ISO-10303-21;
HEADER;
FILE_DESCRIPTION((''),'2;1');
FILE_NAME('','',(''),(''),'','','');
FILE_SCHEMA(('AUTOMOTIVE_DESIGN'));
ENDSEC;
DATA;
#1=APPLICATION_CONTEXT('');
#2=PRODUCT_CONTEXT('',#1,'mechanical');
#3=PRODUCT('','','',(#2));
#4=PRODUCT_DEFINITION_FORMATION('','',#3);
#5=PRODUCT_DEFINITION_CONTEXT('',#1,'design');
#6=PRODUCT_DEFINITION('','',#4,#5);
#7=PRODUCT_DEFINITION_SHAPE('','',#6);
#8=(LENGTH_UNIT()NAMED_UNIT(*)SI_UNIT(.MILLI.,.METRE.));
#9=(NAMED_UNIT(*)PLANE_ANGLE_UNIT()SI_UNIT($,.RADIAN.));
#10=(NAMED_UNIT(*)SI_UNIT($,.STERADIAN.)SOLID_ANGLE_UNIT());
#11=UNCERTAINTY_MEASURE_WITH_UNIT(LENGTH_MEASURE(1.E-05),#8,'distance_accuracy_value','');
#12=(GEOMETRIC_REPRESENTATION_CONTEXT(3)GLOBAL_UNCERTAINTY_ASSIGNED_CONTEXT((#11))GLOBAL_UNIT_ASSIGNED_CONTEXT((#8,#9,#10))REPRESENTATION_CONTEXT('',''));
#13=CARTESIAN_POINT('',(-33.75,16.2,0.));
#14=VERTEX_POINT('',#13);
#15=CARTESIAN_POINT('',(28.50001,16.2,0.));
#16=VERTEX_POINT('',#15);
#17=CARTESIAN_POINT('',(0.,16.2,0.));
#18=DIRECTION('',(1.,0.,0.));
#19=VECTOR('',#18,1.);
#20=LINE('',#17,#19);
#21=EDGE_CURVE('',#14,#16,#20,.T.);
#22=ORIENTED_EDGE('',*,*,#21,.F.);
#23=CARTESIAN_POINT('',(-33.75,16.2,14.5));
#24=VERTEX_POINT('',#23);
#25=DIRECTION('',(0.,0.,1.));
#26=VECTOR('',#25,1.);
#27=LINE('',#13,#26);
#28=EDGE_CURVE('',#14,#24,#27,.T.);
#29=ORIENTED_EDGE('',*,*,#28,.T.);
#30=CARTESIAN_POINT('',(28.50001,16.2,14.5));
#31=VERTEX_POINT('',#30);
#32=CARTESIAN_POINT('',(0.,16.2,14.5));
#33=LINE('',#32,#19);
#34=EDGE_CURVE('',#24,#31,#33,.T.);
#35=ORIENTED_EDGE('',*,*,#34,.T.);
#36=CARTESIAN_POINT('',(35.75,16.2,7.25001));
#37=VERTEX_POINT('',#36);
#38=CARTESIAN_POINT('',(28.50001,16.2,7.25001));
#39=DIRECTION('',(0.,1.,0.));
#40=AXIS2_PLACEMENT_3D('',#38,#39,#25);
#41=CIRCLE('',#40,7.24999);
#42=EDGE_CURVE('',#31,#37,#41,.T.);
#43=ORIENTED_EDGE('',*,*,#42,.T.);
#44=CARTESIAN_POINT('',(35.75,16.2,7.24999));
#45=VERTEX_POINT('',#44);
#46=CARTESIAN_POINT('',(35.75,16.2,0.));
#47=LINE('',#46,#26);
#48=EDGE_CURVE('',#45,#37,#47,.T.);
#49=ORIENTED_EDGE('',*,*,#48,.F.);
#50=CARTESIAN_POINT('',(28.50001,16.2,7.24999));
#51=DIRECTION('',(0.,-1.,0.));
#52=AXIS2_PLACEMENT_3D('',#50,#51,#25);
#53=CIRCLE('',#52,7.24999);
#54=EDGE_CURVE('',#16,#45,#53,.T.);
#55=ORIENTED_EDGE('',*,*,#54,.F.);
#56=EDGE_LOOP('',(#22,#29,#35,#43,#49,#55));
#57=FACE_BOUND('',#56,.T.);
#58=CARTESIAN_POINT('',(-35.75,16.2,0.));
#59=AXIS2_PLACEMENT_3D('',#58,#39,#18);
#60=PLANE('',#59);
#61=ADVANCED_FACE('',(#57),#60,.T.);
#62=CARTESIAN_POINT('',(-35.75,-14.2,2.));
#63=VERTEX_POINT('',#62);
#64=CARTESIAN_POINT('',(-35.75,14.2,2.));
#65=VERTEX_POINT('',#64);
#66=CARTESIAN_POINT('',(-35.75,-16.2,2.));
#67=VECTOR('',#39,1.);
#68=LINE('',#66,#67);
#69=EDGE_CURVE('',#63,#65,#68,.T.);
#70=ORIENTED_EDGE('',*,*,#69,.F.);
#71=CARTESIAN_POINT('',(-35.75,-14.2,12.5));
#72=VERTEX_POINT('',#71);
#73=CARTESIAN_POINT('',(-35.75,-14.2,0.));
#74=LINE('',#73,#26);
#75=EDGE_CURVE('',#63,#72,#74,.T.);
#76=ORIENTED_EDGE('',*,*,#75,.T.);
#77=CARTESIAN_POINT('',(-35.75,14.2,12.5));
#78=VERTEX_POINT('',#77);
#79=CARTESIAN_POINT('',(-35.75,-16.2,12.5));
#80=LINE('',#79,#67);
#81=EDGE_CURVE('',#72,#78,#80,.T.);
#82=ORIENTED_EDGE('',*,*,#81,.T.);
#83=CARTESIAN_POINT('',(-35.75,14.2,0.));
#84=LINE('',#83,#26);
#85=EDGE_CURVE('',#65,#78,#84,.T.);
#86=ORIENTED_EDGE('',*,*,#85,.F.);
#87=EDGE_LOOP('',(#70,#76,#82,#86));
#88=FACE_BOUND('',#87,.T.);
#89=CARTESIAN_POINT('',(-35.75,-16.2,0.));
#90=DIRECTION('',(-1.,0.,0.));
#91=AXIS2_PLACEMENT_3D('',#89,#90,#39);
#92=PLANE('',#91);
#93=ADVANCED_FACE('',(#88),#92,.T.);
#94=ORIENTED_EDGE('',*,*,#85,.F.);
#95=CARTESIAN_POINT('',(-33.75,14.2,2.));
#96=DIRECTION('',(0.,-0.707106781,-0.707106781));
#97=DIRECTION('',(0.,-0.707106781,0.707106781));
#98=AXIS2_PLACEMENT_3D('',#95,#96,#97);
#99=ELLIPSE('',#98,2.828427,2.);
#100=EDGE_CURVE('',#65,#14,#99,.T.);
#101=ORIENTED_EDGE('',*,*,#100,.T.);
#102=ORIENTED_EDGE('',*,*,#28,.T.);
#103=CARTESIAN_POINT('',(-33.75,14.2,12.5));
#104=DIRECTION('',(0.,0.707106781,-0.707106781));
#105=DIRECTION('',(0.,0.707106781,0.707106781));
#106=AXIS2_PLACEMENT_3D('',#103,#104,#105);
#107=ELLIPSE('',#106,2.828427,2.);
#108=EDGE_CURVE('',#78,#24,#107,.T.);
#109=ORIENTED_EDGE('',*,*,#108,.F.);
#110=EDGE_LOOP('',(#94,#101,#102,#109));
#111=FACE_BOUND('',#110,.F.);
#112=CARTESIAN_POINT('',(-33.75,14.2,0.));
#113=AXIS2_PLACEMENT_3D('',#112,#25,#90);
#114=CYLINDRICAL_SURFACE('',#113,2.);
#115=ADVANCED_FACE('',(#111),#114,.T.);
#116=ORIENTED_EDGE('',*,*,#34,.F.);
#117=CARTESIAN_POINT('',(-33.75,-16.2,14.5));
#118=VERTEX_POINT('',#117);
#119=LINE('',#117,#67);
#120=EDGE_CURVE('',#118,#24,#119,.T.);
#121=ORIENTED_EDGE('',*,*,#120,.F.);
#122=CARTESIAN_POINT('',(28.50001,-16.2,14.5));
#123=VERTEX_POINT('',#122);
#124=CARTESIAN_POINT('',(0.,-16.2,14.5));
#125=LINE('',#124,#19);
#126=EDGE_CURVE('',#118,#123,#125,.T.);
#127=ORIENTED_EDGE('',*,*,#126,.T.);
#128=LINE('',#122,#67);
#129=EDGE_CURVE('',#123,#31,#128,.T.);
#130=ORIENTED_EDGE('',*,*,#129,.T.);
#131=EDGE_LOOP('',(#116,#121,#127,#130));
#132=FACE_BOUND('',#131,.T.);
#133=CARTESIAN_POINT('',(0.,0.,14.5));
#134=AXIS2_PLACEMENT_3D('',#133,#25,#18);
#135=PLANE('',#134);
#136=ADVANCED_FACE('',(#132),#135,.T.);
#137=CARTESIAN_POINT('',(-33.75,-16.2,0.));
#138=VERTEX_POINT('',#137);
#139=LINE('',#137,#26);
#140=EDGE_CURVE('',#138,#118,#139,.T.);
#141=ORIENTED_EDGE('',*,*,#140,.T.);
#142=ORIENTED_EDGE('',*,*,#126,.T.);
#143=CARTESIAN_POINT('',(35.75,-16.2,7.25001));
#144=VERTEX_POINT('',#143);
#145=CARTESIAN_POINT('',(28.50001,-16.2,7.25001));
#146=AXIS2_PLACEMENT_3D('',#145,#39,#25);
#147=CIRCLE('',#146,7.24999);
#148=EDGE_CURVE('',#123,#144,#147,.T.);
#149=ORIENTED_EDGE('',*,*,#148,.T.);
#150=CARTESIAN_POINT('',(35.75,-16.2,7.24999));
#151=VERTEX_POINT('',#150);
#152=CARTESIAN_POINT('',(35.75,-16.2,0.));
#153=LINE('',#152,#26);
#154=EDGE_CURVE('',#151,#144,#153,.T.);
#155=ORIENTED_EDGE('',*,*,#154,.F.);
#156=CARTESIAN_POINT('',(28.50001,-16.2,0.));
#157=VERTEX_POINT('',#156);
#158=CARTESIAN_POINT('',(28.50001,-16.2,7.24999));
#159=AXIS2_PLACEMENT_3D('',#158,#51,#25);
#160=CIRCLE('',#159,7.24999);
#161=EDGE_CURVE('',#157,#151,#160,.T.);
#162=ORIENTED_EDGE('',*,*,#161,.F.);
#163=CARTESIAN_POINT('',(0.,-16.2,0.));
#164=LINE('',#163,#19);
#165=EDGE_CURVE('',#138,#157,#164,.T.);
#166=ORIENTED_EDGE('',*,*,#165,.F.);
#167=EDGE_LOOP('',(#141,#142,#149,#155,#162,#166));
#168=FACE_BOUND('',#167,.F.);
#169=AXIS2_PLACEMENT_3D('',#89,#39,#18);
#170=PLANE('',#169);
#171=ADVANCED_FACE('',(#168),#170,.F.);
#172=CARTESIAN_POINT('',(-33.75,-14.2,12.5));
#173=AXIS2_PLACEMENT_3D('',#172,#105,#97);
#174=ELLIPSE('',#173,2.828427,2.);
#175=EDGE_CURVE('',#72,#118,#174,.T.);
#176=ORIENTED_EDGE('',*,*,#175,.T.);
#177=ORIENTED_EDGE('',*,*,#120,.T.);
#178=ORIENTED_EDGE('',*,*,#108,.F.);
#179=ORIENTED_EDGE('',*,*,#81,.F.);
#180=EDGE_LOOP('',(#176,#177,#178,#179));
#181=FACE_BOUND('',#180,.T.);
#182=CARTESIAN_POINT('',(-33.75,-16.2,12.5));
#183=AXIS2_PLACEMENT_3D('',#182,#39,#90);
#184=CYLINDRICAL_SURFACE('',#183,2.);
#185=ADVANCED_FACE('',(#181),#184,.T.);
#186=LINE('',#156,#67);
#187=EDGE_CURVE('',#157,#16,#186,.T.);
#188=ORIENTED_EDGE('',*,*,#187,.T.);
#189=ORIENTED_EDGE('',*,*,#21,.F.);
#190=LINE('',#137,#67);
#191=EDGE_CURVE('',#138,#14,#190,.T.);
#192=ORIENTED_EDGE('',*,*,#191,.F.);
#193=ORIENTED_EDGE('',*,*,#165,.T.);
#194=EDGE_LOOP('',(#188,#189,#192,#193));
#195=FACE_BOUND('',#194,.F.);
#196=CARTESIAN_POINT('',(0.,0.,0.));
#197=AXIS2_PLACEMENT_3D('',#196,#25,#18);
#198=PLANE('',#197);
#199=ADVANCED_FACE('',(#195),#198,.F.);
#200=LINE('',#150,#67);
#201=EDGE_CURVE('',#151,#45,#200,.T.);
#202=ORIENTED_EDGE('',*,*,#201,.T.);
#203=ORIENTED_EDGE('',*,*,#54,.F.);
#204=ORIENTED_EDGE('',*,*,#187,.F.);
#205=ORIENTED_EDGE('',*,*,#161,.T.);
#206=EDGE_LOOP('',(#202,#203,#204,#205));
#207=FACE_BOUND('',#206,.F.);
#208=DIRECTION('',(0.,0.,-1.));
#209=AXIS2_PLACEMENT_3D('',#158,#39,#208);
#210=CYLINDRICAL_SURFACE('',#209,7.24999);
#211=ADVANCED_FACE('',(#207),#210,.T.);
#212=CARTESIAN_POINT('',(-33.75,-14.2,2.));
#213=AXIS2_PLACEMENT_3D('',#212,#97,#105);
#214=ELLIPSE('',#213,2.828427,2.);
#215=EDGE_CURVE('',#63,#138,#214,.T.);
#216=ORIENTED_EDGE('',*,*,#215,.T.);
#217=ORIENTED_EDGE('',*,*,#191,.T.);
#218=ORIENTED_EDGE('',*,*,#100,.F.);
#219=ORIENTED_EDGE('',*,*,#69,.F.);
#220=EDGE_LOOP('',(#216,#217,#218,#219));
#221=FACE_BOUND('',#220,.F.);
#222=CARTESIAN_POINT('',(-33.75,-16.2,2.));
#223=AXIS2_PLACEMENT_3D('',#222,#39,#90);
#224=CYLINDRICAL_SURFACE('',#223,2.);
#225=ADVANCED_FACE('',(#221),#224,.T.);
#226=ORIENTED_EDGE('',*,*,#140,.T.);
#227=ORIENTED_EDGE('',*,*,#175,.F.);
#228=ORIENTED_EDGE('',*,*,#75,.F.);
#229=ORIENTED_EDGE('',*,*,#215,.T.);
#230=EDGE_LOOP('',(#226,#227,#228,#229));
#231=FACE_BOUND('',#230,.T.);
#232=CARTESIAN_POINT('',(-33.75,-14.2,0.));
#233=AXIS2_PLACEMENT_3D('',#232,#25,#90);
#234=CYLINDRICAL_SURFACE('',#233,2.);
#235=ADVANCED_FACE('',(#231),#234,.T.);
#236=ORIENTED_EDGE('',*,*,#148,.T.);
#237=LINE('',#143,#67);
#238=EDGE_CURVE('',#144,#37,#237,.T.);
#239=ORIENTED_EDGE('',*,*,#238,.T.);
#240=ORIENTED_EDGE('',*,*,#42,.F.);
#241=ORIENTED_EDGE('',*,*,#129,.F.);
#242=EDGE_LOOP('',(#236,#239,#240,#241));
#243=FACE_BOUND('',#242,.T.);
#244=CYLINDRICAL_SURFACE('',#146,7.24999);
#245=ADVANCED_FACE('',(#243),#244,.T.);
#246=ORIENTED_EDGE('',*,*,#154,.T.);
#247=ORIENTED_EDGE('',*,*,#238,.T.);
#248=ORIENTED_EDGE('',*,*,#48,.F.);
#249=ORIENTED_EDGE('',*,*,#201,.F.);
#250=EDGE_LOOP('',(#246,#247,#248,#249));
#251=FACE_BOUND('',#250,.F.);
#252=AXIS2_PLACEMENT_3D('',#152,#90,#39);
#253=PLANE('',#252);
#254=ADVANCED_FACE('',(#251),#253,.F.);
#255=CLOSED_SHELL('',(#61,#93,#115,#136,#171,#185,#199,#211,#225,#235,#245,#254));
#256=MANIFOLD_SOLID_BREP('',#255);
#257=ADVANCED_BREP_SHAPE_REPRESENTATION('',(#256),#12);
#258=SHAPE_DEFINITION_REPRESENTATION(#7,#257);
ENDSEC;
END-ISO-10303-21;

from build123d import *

# Parameters (mm, degrees)
F0_W     = 71.5
F0_H     = 32.4
F1_DEPTH = 14.5
F2_R     = 2
F3_R     = 7.24999


# Not quite as in the source:
# - a fillet or chamfer is up to 0.001 mm smaller than in the source, because OpenCascade refuses the exact size


with BuildPart() as f1:
    # F0 (on Top) → F1 (new body)
    with BuildSketch(Plane.XY):
        Rectangle(F0_W, F0_H)
    extrude(amount=F1_DEPTH)

    # F2
    f2_edges = [f1.edges().sort_by_distance(p)[0] for p in [
        (-35.75, 16.2, 7.25),
        (-35.75, -16.2, 7.25),
        (-35.75, 0, 0),
        (-35.75, 0, 14.5),
    ]]
    fillet(f2_edges, radius=F2_R)

    # F3 (radius 7.25 in the source; OpenCascade refuses exactly that, so slightly less here)
    f3_edges = [f1.edges().sort_by_distance(p)[0] for p in [
        (35.75, 0, 14.5),
        (35.75, 0, 0),
    ]]
    fillet(f3_edges, radius=F3_R)


solid = f1.part
